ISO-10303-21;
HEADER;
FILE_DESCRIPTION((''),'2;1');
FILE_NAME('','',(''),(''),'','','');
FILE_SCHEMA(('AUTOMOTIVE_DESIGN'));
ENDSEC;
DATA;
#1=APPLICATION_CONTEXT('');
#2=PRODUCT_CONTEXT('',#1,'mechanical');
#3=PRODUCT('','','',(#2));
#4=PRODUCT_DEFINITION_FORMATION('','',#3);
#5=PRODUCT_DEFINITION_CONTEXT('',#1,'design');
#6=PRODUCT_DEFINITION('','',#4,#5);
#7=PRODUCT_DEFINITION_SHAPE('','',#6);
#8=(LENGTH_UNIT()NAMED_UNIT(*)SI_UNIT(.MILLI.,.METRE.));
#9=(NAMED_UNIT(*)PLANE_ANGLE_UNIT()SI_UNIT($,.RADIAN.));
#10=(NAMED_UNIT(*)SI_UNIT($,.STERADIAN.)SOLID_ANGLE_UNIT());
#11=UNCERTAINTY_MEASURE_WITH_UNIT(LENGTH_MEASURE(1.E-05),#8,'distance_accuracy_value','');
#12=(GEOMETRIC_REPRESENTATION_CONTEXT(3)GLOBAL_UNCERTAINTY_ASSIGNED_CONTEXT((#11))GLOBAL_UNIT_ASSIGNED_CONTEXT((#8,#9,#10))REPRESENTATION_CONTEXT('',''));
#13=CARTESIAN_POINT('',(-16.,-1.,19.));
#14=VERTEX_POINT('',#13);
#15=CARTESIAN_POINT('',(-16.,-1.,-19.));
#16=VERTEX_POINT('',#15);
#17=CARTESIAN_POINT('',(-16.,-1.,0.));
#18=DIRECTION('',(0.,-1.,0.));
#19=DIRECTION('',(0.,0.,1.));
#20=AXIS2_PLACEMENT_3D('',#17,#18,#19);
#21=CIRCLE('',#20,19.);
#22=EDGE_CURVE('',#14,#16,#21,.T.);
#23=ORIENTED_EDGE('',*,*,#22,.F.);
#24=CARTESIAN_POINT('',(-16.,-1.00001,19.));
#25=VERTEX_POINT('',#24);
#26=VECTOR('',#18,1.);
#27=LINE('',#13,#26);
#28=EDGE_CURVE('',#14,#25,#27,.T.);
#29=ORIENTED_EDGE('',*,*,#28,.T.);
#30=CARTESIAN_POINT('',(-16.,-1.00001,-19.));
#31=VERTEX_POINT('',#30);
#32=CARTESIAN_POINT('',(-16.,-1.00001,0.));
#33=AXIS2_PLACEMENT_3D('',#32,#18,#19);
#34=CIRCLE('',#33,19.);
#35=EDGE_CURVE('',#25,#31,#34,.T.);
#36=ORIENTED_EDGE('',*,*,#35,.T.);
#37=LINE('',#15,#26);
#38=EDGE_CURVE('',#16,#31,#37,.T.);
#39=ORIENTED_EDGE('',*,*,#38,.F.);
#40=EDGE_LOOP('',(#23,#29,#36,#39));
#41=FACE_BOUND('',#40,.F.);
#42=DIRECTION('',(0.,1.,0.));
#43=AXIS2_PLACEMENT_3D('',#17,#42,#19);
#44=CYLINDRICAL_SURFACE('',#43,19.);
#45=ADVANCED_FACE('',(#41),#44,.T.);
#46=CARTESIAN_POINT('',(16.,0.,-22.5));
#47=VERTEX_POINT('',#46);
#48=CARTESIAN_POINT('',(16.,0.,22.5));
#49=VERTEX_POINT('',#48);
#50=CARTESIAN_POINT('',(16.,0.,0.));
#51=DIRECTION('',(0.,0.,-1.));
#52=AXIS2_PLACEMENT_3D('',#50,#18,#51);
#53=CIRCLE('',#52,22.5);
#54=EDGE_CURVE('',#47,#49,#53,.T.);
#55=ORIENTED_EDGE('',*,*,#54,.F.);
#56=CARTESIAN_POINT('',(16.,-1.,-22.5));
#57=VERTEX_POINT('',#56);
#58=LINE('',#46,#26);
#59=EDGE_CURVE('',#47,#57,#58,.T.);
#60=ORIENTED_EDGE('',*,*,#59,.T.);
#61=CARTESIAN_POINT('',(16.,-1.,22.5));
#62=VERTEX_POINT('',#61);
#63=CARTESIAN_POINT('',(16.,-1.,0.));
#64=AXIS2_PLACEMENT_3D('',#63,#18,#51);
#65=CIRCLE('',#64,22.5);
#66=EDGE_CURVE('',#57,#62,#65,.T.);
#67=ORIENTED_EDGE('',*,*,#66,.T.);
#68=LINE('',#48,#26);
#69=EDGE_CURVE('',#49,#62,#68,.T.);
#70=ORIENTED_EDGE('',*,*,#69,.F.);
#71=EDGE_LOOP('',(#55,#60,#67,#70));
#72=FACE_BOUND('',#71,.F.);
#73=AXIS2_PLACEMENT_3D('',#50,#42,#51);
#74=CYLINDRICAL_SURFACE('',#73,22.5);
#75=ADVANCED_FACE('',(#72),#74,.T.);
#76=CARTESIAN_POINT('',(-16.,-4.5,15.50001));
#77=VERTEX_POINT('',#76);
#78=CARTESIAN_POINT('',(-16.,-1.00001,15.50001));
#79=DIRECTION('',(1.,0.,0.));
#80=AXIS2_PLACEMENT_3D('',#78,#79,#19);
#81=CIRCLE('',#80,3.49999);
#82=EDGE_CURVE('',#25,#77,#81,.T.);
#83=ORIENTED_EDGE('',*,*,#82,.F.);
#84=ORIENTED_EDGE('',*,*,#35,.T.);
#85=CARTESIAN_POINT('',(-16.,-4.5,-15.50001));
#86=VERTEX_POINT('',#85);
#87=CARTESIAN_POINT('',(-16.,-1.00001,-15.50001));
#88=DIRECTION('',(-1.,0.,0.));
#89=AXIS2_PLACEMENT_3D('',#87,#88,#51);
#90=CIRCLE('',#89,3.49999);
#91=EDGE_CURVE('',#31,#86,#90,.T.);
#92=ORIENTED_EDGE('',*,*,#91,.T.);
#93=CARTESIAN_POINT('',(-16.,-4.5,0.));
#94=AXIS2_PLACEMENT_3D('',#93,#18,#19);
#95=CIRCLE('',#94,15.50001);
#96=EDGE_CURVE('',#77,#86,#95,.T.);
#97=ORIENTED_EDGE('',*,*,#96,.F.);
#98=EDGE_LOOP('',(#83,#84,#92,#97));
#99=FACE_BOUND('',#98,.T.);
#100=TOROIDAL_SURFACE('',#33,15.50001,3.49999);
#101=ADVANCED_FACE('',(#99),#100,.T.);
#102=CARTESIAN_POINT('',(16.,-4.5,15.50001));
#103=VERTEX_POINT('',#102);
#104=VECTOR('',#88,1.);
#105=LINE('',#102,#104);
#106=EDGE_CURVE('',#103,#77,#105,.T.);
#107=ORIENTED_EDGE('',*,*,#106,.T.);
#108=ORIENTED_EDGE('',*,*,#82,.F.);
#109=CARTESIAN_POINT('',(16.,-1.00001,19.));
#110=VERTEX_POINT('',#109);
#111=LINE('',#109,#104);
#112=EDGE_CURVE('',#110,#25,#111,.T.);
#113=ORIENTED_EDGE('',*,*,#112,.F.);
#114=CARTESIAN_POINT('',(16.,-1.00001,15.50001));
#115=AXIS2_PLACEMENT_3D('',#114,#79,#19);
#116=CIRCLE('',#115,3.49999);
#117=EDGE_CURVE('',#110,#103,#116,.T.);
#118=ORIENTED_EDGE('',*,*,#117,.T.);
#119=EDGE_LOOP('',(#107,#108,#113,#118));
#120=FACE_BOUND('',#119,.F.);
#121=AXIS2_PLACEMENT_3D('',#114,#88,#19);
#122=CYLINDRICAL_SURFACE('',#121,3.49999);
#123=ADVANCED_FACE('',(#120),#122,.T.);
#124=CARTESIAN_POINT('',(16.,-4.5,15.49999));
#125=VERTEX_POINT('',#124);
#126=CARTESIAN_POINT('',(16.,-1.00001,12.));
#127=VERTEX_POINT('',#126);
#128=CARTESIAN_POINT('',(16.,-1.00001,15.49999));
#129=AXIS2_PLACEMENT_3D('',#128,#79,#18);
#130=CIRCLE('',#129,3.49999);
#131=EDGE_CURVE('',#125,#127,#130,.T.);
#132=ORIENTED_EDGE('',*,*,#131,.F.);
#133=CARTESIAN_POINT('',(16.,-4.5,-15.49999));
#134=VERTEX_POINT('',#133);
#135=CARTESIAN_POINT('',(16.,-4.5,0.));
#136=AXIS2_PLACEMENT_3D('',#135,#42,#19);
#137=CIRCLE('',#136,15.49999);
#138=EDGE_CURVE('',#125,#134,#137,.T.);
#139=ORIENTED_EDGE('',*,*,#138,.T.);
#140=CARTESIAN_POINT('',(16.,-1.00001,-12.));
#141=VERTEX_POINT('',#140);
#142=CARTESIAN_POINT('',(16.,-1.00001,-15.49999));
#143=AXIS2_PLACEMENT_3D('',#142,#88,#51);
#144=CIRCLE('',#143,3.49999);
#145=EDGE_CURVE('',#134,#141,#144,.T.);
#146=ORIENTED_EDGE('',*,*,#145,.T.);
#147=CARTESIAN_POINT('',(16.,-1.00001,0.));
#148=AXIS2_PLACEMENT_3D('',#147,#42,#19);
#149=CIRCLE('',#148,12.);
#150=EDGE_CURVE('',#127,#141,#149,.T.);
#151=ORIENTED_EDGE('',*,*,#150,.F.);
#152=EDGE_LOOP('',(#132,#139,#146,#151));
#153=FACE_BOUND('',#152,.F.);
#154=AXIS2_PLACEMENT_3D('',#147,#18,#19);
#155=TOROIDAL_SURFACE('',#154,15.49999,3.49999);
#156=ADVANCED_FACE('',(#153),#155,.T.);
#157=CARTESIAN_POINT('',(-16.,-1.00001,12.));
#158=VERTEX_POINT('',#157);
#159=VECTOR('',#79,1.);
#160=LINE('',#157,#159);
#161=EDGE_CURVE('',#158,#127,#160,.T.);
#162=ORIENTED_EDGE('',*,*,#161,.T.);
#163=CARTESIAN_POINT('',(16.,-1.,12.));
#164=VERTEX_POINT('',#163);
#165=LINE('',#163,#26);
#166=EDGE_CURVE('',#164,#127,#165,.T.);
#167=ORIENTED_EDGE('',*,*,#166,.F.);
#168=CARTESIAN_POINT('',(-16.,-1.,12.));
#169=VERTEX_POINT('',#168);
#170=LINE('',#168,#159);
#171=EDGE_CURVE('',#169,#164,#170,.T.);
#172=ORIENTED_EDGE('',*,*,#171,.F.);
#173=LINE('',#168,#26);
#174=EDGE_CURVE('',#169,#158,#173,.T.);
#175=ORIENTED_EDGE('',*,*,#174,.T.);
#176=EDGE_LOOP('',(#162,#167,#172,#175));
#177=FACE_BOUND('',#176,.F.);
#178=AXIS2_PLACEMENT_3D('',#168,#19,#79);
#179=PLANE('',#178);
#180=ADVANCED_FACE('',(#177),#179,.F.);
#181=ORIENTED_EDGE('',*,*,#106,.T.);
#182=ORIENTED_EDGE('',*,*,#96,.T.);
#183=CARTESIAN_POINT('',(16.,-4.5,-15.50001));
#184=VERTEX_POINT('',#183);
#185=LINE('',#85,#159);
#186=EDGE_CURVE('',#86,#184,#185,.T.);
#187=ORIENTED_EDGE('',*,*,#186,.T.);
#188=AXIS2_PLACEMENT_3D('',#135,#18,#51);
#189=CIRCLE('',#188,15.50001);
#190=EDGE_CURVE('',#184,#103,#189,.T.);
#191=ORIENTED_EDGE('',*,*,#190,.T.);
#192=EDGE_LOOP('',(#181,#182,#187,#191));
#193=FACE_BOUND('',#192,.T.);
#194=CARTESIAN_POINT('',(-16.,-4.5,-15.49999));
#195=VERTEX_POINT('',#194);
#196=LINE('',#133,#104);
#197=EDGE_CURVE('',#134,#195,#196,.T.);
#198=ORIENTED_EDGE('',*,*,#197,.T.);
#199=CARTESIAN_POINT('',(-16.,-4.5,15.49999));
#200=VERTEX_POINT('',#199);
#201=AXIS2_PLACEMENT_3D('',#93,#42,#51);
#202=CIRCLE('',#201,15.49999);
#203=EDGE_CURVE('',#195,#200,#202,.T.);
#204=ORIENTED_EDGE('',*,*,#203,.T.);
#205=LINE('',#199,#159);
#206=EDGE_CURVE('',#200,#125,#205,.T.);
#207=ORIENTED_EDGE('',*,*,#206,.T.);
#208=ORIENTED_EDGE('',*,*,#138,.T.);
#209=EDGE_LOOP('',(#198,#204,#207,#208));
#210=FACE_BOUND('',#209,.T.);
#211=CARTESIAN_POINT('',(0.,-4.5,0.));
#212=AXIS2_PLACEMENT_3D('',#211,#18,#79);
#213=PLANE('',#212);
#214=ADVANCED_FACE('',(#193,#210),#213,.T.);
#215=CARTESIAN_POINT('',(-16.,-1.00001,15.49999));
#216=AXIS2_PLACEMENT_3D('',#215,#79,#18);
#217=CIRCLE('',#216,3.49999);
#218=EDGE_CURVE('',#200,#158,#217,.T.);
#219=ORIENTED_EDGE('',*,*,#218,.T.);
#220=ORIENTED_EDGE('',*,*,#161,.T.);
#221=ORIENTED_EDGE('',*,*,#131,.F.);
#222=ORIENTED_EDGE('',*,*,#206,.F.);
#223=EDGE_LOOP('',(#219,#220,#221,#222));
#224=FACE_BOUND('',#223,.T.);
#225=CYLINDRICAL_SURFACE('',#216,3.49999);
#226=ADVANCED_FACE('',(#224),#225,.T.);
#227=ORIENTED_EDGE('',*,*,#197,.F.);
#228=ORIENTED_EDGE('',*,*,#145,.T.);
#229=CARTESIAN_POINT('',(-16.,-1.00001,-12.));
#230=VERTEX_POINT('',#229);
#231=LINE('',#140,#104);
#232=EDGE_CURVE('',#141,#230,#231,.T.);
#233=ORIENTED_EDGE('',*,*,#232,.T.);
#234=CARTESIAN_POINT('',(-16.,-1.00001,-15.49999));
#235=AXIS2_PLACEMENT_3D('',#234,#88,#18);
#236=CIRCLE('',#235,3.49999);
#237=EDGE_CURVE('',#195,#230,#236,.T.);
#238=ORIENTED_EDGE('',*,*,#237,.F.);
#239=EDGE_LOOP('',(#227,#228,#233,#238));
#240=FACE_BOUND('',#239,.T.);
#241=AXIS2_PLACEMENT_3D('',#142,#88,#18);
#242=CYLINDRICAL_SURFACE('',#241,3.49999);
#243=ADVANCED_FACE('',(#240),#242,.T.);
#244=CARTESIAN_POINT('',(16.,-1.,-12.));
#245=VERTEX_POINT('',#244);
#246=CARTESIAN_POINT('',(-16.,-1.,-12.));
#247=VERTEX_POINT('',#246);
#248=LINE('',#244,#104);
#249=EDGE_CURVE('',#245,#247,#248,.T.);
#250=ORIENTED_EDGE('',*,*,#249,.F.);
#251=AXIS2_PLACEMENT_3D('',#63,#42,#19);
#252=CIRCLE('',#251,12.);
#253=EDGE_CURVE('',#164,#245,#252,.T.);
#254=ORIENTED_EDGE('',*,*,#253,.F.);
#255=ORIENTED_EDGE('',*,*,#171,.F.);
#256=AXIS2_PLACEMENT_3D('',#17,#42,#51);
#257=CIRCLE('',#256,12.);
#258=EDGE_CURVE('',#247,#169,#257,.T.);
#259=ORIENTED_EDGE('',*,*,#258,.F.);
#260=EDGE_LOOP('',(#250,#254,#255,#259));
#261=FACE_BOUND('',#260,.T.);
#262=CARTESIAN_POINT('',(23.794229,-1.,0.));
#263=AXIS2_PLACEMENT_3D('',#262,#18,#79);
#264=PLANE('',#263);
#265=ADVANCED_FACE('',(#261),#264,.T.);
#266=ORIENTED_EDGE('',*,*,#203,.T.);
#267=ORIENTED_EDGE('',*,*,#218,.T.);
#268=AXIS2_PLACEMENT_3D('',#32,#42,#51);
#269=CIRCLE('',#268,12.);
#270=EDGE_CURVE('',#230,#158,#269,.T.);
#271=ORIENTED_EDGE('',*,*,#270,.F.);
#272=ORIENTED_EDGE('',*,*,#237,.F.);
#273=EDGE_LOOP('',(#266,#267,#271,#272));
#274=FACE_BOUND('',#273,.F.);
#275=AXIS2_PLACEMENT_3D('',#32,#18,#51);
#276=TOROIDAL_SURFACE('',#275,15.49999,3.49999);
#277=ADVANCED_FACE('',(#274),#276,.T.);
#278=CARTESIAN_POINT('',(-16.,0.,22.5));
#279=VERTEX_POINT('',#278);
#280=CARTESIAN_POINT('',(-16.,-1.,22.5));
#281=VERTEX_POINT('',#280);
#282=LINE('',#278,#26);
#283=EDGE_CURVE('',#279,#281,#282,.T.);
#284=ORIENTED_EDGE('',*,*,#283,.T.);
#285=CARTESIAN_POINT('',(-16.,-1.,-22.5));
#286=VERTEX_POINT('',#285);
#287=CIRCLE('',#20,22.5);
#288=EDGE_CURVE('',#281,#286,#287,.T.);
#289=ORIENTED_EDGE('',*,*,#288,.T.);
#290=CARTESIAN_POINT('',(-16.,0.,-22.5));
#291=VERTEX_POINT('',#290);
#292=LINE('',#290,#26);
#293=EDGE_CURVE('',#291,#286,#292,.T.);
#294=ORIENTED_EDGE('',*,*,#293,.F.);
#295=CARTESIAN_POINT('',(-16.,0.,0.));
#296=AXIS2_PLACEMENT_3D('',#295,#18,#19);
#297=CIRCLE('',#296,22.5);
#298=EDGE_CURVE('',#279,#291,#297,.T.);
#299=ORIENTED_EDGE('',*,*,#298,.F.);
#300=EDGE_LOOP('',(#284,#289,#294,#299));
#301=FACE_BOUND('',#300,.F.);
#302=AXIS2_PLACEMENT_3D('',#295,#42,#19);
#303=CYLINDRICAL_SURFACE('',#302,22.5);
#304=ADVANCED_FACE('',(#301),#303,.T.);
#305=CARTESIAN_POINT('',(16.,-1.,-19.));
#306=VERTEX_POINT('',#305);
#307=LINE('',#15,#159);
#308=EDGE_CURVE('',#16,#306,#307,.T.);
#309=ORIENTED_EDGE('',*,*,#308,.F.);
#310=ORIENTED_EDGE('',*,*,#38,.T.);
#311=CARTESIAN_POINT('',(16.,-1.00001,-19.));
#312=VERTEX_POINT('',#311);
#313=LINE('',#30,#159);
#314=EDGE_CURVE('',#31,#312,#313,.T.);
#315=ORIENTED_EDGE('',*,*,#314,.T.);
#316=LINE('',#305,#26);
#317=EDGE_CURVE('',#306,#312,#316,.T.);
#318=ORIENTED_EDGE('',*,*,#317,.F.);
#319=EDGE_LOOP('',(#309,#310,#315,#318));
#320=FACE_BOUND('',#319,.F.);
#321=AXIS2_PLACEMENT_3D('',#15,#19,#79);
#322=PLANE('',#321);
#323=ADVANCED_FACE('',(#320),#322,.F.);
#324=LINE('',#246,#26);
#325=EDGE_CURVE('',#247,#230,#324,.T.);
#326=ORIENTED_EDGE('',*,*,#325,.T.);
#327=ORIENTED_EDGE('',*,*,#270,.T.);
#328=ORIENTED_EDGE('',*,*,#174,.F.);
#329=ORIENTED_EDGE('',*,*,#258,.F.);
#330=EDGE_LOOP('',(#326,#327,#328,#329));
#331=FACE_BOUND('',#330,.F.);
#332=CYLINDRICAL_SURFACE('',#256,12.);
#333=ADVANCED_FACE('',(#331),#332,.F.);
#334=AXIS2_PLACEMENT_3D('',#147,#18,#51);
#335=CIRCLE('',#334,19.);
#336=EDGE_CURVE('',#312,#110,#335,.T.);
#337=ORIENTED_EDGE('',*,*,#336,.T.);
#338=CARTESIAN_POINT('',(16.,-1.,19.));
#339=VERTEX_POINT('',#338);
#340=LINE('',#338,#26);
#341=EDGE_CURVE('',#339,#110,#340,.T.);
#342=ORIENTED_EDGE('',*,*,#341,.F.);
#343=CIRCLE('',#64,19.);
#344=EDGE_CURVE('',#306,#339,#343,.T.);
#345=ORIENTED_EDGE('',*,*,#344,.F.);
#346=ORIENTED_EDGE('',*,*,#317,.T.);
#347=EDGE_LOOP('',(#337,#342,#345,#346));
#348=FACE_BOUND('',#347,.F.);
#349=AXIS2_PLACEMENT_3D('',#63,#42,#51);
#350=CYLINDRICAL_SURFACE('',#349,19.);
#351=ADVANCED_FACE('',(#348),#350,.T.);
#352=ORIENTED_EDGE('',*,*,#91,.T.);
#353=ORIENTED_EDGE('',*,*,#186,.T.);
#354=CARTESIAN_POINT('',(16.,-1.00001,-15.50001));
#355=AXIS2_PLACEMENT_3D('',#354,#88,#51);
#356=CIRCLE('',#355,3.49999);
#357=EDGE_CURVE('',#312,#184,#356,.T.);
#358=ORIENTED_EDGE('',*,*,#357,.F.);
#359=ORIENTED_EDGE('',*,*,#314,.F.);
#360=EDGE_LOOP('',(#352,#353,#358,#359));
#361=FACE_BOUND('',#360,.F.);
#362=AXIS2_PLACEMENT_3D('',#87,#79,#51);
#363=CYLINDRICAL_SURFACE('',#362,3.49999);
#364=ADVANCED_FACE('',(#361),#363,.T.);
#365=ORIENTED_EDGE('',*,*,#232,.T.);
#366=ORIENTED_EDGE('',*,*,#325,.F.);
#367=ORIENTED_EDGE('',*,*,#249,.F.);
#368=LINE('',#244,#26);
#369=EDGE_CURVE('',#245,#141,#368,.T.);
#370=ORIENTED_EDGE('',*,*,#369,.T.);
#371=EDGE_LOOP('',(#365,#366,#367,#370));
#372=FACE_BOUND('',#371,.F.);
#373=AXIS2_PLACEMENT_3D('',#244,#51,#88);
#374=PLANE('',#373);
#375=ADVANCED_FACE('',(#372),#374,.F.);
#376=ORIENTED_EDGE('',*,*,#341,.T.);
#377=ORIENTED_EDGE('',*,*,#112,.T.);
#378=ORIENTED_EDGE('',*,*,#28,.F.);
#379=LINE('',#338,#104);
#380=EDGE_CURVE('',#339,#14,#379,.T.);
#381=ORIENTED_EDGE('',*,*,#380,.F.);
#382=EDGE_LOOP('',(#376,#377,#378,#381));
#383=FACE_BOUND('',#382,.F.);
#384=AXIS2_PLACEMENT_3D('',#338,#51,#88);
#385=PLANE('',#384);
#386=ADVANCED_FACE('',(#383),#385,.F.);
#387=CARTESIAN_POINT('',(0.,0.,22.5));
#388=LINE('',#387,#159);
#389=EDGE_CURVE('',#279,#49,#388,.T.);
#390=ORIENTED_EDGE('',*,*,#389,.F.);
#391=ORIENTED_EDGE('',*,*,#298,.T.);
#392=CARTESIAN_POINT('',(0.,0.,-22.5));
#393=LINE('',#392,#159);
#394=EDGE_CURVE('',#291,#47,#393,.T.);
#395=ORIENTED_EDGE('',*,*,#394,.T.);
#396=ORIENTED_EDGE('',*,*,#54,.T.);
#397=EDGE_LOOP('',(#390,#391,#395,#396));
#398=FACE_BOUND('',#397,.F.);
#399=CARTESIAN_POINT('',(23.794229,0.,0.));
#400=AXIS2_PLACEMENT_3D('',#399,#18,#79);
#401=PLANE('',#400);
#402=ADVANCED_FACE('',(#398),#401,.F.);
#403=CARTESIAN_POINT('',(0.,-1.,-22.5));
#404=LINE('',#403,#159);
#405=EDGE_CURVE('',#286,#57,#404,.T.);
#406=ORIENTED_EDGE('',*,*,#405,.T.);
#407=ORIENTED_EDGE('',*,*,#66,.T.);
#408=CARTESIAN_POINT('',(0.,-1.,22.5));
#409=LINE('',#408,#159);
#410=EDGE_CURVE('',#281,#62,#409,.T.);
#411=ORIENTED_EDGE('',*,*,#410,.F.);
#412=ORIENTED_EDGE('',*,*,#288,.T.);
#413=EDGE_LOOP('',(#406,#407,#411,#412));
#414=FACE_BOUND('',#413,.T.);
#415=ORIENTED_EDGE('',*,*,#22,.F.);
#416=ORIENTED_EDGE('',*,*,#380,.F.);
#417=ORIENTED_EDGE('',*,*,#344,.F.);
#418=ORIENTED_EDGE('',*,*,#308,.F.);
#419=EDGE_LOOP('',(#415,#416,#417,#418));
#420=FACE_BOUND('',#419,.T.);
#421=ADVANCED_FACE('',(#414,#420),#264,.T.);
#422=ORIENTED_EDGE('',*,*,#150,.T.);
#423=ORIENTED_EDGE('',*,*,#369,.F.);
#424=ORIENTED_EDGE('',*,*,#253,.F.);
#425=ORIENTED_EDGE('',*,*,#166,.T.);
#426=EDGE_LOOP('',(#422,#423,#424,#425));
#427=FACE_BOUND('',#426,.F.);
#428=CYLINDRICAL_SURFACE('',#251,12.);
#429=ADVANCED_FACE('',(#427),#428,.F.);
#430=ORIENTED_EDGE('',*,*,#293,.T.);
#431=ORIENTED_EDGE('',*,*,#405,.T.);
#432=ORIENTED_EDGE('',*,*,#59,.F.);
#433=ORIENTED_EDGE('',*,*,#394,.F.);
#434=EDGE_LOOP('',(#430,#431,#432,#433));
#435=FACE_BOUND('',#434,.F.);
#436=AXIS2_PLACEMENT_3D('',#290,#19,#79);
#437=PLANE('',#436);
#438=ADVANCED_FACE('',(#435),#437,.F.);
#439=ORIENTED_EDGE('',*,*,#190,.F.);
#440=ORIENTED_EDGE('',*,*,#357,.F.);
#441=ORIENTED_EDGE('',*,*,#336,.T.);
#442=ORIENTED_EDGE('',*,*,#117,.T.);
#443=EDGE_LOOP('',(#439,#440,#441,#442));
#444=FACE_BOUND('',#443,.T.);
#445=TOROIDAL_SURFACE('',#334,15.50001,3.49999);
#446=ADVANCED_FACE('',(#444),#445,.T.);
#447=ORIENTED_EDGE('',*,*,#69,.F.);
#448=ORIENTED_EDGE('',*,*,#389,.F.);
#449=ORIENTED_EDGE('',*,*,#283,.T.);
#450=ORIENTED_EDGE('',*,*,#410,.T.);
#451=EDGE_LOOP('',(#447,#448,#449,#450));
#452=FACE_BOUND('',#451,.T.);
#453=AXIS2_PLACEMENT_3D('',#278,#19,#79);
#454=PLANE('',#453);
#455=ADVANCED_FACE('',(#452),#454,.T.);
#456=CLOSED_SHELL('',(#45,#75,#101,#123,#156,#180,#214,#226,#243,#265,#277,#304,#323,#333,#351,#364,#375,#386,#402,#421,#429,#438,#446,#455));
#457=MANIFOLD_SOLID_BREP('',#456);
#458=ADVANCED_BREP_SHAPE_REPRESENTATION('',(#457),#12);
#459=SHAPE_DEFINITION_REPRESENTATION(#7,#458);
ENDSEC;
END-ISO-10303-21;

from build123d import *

# Parameters (mm, degrees)
F0_W     = 32
F0_H     = 45
F1_DEPTH = 1
F3_DEPTH = 3.5
F4_R     = 3.49999


# Not quite as in the source:
# - a fillet or chamfer is up to 0.001 mm smaller than in the source, because OpenCascade refuses the exact size


with BuildPart() as f1:
    # F0 (on Front) → F1 (new body)
    with BuildSketch(Plane.XZ):
        with BuildLine():
            Line((16, 22.5), (16, -22.5))
            ThreePointArc((16, -22.5), (38.5, 0), (16, 22.5))
        make_face()
        Rectangle(F0_W, F0_H)
        with BuildLine():
            ThreePointArc((-16, 22.5), (-38.5, 0), (-16, -22.5))
            Line((-16, -22.5), (-16, 22.5))
        make_face()
    extrude(amount=F1_DEPTH)

    # F2 (on face) → F3 (join)
    with BuildSketch(Plane.XZ.offset(1)):
        with BuildLine():
            ThreePointArc((16, -19), (35, 0), (16, 19))
            Line((16, 19), (-16, 19))
            ThreePointArc((-16, 19), (-35, 0), (-16, -19))
            Line((-16, -19), (16, -19))
        make_face()
        with BuildLine():
            ThreePointArc((-16, -12), (-28, 0), (-16, 12))
            Line((-16, 12), (16, 12))
            ThreePointArc((16, 12), (28, 0), (16, -12))
            Line((16, -12), (-16, -12))
        make_face(mode=Mode.SUBTRACT)
    extrude(amount=F3_DEPTH)

    # F4 (radius 3.5 in the source; OpenCascade refuses exactly that, so slightly less here)
    f4_edges = [f1.edges().sort_by_distance(p)[0] for p in [
        (0, -4.5, 19),
        (0, -4.5, 12),
    ]]
    fillet(f4_edges, radius=F4_R)


solid = f1.part
